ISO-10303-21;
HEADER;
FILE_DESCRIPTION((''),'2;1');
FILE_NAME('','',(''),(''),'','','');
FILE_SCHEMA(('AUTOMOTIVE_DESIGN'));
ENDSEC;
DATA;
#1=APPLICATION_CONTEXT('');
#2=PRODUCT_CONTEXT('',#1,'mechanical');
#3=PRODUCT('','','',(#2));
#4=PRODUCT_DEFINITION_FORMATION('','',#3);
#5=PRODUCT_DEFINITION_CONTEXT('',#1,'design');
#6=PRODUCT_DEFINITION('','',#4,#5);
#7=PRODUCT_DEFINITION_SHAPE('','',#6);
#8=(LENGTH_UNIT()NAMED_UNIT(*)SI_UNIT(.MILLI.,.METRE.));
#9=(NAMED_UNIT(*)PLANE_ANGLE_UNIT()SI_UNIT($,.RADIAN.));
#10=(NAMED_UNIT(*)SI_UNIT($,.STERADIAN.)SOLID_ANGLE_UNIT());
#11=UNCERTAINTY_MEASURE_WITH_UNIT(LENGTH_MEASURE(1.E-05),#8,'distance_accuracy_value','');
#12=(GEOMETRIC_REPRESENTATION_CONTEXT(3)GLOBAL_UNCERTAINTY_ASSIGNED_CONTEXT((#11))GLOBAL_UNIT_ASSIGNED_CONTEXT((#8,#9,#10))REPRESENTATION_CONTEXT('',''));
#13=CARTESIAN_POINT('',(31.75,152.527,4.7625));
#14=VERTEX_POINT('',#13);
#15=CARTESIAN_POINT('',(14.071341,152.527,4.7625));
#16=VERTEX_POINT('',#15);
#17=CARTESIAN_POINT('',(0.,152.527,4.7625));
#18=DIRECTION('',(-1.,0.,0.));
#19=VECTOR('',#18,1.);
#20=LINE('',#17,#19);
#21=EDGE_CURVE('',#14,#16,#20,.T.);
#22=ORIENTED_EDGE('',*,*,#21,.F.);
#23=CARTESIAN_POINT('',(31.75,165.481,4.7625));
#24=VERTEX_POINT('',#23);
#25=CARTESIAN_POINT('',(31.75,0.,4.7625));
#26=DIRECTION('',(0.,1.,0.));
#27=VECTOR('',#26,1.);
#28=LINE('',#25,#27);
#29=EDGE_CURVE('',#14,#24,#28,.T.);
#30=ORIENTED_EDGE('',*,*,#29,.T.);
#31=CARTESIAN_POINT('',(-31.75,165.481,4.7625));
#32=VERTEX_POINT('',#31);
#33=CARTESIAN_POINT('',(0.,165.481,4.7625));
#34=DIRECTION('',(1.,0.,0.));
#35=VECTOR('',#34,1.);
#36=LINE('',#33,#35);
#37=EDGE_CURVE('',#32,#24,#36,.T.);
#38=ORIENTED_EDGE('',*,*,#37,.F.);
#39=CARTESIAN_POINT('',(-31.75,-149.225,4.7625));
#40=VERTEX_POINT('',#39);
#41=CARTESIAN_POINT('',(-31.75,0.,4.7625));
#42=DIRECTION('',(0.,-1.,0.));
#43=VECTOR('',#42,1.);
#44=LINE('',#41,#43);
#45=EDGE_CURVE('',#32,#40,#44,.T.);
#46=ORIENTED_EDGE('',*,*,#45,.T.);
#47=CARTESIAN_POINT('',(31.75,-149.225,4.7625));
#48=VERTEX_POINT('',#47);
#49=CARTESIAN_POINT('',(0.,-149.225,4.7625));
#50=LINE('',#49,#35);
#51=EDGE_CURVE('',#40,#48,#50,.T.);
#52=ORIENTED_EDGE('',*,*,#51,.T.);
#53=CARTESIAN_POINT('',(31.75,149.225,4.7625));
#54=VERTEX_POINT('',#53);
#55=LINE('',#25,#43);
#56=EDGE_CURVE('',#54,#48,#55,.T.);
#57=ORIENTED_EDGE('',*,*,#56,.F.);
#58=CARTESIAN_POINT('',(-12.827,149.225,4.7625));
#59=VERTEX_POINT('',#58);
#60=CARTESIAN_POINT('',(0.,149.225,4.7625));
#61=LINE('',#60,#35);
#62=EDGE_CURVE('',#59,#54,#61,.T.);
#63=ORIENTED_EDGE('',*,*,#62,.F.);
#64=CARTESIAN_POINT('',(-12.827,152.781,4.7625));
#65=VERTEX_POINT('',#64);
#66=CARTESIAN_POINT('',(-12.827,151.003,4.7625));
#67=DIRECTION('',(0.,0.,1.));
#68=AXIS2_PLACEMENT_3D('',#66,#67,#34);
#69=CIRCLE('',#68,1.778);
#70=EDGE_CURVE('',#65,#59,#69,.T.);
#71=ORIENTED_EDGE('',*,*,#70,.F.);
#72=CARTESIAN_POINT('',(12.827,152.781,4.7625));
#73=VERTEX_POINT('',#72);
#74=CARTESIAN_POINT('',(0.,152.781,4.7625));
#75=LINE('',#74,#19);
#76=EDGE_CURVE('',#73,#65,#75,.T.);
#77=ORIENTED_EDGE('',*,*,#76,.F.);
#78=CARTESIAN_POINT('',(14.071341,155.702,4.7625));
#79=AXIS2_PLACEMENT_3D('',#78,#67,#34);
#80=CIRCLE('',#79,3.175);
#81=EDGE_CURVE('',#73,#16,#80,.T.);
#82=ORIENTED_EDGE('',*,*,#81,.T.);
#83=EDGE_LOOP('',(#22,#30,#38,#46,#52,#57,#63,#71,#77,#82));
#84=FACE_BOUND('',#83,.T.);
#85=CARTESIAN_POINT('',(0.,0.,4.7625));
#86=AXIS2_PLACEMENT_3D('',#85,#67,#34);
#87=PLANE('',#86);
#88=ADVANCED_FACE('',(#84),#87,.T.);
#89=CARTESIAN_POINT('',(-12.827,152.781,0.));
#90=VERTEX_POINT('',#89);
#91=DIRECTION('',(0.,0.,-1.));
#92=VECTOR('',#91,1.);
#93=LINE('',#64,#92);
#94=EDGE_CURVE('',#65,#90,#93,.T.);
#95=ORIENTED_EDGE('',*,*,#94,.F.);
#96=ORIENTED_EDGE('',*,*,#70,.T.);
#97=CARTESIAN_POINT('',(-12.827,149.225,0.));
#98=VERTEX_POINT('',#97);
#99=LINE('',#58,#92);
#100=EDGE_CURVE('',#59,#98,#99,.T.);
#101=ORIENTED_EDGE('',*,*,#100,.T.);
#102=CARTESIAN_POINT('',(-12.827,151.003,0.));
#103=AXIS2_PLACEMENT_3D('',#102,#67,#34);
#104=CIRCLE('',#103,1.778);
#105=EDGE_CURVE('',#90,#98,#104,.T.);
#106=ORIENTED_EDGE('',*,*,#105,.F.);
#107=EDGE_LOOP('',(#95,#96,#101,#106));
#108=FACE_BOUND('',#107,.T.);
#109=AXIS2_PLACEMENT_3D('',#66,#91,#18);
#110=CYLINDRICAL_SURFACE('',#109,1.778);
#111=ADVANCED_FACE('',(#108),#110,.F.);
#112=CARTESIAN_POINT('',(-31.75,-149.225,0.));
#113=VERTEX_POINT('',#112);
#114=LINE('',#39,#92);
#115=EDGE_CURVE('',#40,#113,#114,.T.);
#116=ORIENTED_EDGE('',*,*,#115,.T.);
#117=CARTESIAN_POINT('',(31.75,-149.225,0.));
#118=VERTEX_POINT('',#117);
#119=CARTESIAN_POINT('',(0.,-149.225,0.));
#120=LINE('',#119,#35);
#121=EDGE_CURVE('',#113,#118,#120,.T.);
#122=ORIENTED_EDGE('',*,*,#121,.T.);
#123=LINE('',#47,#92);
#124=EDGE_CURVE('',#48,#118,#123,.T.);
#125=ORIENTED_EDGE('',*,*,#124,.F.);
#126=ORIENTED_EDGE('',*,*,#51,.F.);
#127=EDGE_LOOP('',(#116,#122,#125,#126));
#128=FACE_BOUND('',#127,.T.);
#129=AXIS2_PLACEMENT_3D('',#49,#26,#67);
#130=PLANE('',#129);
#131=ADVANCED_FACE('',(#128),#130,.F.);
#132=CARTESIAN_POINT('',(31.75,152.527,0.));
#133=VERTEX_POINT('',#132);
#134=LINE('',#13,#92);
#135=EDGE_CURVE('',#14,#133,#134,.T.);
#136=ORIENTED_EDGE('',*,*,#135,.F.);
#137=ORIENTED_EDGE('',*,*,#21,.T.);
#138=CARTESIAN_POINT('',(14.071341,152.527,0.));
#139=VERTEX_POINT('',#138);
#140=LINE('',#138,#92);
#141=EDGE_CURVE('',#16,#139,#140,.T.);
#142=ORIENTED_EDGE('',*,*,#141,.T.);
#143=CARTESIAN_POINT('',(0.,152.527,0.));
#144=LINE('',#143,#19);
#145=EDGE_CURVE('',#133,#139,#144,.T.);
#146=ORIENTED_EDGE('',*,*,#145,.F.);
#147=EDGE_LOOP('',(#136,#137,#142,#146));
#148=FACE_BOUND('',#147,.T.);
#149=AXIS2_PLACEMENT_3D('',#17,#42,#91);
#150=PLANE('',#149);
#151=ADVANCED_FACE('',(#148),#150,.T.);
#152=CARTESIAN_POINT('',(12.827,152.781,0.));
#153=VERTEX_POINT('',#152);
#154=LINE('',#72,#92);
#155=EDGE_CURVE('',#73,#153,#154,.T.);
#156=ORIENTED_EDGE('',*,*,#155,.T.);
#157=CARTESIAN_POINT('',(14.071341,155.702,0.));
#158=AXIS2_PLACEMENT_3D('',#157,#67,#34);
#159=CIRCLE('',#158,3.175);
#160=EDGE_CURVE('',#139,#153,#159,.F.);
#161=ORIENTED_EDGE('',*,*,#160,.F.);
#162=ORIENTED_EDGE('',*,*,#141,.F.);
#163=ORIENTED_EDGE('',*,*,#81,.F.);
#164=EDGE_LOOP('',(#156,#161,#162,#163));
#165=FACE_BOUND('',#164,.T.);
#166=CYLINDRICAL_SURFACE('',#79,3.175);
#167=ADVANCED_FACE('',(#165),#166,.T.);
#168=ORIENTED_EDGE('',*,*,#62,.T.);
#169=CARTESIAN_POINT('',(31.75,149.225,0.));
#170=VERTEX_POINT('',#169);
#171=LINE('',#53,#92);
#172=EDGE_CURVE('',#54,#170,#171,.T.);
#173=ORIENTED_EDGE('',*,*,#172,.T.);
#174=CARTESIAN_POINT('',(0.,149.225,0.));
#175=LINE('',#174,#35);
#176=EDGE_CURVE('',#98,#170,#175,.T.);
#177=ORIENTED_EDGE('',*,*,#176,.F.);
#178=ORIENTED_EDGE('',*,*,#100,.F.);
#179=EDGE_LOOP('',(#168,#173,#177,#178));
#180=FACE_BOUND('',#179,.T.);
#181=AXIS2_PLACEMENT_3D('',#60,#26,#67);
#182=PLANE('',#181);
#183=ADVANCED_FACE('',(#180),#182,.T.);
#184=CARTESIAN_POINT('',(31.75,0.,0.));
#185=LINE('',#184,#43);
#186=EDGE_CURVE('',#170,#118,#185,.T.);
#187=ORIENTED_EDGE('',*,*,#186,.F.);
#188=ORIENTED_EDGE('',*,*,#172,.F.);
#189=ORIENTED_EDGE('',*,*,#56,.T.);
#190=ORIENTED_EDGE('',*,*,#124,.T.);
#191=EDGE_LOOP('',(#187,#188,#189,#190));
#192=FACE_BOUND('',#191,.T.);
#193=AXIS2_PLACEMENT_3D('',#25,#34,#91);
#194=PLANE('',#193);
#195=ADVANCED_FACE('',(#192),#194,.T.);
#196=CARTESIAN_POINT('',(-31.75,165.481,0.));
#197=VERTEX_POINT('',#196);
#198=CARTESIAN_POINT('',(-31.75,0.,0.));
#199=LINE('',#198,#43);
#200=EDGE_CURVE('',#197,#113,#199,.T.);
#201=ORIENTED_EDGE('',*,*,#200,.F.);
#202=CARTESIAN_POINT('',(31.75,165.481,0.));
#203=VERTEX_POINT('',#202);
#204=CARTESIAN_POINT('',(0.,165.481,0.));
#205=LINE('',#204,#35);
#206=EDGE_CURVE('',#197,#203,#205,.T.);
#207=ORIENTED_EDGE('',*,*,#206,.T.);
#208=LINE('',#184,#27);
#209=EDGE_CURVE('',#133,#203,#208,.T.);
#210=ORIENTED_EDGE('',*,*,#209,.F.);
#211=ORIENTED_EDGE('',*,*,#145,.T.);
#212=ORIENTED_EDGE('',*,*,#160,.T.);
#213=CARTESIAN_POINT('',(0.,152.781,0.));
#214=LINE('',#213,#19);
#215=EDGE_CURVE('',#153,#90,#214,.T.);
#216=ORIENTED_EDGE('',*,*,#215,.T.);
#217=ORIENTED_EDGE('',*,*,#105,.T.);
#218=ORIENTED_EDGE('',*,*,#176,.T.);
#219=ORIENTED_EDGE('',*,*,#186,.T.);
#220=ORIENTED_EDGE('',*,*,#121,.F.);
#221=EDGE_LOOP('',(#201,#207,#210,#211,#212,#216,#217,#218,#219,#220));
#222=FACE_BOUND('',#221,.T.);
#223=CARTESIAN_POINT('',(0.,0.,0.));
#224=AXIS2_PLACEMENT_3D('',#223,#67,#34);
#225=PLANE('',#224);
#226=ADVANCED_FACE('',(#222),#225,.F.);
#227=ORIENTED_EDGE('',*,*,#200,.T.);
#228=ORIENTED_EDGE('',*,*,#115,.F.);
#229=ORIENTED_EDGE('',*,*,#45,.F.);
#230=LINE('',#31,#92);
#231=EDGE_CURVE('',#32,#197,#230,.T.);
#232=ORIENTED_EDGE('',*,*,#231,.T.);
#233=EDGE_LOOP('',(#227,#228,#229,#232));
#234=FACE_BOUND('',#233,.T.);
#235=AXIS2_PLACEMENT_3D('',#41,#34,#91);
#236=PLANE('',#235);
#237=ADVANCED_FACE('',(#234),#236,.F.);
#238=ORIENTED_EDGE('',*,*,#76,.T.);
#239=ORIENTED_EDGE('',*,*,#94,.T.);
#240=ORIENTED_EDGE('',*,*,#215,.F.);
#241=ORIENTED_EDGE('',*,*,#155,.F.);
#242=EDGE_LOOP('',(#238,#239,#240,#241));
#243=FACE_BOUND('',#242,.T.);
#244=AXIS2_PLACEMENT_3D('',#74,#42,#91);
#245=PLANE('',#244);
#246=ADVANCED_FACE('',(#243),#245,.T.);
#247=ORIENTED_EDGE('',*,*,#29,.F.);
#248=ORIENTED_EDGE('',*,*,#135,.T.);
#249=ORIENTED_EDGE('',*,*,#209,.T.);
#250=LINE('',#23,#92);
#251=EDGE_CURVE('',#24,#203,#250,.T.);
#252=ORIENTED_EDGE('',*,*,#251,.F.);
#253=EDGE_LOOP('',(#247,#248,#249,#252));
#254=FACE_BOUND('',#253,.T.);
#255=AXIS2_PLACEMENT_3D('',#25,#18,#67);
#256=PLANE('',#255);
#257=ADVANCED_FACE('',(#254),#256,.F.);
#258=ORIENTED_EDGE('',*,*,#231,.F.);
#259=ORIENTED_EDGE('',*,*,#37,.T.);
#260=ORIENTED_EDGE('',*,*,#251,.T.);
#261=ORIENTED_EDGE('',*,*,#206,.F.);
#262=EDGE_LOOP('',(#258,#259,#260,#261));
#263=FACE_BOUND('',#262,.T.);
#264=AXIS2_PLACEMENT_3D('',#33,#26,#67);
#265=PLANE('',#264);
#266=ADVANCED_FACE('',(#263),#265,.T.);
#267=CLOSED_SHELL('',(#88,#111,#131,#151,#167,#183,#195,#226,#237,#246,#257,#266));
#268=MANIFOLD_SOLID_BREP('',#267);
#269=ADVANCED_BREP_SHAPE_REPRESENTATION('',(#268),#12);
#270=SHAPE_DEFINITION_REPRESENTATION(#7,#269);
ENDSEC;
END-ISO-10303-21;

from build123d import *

# Parameters (mm, degrees)
BOSS_EXTRUDE1_DEPTH = 4.7625
FILLET1_R           = 3.175


with BuildPart() as part:
    # Sketch1 → Boss-Extrude1 (new body)
    with BuildSketch(Plane.XY):
        with BuildLine():
            Line((-31.75, 165.481), (-31.75, 149.225))
            Line((-31.75, 149.225), (-12.827, 149.225))
            ThreePointArc((-12.827, 149.225), (-14.605, 151.003), (-12.827, 152.781))
            Line((-12.827, 152.781), (12.827, 152.781))
            Line((12.827, 152.781), (12.827, 152.527))
            Line((12.827, 152.527), (31.75, 152.527))
            Line((31.75, 152.527), (31.75, 165.481))
            Line((31.75, 165.481), (-31.75, 165.481))
        make_face()
        Polygon((-12.827, 149.225), (-31.75, 149.225), (-31.75, -149.225), (31.75, -149.225), (31.75, 149.225), align=None)
    extrude(amount=BOSS_EXTRUDE1_DEPTH)

    # Fillet1
    # the kernel refuses this fillet: 3.175 mm, written as the material it takes off along each edge
    with BuildSketch(Plane(origin=(12.827, 152.527, -3.110851973), x_dir=(0, 1, 0), z_dir=(0, 0, 1))) as fillet1_piece_1:
        with BuildLine():
            CenterArc((3.175, -1.244340789), FILLET1_R, 156.926081934, 23.073918066)
            Line((0, -1.244340789), (-0.0635, -1.244340789))
            Line((-0.0635, -1.244340789), (-0.0635, 0))
            Line((-0.0635, 0), (0, 0.0635))
            ThreePointArc((0, 0.0635), (0.127, 0.0635), (0.19558, 0.024886816))
            Line((0.19558, 0.024886816), (0.254, 0))
        make_face()
    extrude(amount=10.984203947, mode=Mode.SUBTRACT)


solid = part.part
